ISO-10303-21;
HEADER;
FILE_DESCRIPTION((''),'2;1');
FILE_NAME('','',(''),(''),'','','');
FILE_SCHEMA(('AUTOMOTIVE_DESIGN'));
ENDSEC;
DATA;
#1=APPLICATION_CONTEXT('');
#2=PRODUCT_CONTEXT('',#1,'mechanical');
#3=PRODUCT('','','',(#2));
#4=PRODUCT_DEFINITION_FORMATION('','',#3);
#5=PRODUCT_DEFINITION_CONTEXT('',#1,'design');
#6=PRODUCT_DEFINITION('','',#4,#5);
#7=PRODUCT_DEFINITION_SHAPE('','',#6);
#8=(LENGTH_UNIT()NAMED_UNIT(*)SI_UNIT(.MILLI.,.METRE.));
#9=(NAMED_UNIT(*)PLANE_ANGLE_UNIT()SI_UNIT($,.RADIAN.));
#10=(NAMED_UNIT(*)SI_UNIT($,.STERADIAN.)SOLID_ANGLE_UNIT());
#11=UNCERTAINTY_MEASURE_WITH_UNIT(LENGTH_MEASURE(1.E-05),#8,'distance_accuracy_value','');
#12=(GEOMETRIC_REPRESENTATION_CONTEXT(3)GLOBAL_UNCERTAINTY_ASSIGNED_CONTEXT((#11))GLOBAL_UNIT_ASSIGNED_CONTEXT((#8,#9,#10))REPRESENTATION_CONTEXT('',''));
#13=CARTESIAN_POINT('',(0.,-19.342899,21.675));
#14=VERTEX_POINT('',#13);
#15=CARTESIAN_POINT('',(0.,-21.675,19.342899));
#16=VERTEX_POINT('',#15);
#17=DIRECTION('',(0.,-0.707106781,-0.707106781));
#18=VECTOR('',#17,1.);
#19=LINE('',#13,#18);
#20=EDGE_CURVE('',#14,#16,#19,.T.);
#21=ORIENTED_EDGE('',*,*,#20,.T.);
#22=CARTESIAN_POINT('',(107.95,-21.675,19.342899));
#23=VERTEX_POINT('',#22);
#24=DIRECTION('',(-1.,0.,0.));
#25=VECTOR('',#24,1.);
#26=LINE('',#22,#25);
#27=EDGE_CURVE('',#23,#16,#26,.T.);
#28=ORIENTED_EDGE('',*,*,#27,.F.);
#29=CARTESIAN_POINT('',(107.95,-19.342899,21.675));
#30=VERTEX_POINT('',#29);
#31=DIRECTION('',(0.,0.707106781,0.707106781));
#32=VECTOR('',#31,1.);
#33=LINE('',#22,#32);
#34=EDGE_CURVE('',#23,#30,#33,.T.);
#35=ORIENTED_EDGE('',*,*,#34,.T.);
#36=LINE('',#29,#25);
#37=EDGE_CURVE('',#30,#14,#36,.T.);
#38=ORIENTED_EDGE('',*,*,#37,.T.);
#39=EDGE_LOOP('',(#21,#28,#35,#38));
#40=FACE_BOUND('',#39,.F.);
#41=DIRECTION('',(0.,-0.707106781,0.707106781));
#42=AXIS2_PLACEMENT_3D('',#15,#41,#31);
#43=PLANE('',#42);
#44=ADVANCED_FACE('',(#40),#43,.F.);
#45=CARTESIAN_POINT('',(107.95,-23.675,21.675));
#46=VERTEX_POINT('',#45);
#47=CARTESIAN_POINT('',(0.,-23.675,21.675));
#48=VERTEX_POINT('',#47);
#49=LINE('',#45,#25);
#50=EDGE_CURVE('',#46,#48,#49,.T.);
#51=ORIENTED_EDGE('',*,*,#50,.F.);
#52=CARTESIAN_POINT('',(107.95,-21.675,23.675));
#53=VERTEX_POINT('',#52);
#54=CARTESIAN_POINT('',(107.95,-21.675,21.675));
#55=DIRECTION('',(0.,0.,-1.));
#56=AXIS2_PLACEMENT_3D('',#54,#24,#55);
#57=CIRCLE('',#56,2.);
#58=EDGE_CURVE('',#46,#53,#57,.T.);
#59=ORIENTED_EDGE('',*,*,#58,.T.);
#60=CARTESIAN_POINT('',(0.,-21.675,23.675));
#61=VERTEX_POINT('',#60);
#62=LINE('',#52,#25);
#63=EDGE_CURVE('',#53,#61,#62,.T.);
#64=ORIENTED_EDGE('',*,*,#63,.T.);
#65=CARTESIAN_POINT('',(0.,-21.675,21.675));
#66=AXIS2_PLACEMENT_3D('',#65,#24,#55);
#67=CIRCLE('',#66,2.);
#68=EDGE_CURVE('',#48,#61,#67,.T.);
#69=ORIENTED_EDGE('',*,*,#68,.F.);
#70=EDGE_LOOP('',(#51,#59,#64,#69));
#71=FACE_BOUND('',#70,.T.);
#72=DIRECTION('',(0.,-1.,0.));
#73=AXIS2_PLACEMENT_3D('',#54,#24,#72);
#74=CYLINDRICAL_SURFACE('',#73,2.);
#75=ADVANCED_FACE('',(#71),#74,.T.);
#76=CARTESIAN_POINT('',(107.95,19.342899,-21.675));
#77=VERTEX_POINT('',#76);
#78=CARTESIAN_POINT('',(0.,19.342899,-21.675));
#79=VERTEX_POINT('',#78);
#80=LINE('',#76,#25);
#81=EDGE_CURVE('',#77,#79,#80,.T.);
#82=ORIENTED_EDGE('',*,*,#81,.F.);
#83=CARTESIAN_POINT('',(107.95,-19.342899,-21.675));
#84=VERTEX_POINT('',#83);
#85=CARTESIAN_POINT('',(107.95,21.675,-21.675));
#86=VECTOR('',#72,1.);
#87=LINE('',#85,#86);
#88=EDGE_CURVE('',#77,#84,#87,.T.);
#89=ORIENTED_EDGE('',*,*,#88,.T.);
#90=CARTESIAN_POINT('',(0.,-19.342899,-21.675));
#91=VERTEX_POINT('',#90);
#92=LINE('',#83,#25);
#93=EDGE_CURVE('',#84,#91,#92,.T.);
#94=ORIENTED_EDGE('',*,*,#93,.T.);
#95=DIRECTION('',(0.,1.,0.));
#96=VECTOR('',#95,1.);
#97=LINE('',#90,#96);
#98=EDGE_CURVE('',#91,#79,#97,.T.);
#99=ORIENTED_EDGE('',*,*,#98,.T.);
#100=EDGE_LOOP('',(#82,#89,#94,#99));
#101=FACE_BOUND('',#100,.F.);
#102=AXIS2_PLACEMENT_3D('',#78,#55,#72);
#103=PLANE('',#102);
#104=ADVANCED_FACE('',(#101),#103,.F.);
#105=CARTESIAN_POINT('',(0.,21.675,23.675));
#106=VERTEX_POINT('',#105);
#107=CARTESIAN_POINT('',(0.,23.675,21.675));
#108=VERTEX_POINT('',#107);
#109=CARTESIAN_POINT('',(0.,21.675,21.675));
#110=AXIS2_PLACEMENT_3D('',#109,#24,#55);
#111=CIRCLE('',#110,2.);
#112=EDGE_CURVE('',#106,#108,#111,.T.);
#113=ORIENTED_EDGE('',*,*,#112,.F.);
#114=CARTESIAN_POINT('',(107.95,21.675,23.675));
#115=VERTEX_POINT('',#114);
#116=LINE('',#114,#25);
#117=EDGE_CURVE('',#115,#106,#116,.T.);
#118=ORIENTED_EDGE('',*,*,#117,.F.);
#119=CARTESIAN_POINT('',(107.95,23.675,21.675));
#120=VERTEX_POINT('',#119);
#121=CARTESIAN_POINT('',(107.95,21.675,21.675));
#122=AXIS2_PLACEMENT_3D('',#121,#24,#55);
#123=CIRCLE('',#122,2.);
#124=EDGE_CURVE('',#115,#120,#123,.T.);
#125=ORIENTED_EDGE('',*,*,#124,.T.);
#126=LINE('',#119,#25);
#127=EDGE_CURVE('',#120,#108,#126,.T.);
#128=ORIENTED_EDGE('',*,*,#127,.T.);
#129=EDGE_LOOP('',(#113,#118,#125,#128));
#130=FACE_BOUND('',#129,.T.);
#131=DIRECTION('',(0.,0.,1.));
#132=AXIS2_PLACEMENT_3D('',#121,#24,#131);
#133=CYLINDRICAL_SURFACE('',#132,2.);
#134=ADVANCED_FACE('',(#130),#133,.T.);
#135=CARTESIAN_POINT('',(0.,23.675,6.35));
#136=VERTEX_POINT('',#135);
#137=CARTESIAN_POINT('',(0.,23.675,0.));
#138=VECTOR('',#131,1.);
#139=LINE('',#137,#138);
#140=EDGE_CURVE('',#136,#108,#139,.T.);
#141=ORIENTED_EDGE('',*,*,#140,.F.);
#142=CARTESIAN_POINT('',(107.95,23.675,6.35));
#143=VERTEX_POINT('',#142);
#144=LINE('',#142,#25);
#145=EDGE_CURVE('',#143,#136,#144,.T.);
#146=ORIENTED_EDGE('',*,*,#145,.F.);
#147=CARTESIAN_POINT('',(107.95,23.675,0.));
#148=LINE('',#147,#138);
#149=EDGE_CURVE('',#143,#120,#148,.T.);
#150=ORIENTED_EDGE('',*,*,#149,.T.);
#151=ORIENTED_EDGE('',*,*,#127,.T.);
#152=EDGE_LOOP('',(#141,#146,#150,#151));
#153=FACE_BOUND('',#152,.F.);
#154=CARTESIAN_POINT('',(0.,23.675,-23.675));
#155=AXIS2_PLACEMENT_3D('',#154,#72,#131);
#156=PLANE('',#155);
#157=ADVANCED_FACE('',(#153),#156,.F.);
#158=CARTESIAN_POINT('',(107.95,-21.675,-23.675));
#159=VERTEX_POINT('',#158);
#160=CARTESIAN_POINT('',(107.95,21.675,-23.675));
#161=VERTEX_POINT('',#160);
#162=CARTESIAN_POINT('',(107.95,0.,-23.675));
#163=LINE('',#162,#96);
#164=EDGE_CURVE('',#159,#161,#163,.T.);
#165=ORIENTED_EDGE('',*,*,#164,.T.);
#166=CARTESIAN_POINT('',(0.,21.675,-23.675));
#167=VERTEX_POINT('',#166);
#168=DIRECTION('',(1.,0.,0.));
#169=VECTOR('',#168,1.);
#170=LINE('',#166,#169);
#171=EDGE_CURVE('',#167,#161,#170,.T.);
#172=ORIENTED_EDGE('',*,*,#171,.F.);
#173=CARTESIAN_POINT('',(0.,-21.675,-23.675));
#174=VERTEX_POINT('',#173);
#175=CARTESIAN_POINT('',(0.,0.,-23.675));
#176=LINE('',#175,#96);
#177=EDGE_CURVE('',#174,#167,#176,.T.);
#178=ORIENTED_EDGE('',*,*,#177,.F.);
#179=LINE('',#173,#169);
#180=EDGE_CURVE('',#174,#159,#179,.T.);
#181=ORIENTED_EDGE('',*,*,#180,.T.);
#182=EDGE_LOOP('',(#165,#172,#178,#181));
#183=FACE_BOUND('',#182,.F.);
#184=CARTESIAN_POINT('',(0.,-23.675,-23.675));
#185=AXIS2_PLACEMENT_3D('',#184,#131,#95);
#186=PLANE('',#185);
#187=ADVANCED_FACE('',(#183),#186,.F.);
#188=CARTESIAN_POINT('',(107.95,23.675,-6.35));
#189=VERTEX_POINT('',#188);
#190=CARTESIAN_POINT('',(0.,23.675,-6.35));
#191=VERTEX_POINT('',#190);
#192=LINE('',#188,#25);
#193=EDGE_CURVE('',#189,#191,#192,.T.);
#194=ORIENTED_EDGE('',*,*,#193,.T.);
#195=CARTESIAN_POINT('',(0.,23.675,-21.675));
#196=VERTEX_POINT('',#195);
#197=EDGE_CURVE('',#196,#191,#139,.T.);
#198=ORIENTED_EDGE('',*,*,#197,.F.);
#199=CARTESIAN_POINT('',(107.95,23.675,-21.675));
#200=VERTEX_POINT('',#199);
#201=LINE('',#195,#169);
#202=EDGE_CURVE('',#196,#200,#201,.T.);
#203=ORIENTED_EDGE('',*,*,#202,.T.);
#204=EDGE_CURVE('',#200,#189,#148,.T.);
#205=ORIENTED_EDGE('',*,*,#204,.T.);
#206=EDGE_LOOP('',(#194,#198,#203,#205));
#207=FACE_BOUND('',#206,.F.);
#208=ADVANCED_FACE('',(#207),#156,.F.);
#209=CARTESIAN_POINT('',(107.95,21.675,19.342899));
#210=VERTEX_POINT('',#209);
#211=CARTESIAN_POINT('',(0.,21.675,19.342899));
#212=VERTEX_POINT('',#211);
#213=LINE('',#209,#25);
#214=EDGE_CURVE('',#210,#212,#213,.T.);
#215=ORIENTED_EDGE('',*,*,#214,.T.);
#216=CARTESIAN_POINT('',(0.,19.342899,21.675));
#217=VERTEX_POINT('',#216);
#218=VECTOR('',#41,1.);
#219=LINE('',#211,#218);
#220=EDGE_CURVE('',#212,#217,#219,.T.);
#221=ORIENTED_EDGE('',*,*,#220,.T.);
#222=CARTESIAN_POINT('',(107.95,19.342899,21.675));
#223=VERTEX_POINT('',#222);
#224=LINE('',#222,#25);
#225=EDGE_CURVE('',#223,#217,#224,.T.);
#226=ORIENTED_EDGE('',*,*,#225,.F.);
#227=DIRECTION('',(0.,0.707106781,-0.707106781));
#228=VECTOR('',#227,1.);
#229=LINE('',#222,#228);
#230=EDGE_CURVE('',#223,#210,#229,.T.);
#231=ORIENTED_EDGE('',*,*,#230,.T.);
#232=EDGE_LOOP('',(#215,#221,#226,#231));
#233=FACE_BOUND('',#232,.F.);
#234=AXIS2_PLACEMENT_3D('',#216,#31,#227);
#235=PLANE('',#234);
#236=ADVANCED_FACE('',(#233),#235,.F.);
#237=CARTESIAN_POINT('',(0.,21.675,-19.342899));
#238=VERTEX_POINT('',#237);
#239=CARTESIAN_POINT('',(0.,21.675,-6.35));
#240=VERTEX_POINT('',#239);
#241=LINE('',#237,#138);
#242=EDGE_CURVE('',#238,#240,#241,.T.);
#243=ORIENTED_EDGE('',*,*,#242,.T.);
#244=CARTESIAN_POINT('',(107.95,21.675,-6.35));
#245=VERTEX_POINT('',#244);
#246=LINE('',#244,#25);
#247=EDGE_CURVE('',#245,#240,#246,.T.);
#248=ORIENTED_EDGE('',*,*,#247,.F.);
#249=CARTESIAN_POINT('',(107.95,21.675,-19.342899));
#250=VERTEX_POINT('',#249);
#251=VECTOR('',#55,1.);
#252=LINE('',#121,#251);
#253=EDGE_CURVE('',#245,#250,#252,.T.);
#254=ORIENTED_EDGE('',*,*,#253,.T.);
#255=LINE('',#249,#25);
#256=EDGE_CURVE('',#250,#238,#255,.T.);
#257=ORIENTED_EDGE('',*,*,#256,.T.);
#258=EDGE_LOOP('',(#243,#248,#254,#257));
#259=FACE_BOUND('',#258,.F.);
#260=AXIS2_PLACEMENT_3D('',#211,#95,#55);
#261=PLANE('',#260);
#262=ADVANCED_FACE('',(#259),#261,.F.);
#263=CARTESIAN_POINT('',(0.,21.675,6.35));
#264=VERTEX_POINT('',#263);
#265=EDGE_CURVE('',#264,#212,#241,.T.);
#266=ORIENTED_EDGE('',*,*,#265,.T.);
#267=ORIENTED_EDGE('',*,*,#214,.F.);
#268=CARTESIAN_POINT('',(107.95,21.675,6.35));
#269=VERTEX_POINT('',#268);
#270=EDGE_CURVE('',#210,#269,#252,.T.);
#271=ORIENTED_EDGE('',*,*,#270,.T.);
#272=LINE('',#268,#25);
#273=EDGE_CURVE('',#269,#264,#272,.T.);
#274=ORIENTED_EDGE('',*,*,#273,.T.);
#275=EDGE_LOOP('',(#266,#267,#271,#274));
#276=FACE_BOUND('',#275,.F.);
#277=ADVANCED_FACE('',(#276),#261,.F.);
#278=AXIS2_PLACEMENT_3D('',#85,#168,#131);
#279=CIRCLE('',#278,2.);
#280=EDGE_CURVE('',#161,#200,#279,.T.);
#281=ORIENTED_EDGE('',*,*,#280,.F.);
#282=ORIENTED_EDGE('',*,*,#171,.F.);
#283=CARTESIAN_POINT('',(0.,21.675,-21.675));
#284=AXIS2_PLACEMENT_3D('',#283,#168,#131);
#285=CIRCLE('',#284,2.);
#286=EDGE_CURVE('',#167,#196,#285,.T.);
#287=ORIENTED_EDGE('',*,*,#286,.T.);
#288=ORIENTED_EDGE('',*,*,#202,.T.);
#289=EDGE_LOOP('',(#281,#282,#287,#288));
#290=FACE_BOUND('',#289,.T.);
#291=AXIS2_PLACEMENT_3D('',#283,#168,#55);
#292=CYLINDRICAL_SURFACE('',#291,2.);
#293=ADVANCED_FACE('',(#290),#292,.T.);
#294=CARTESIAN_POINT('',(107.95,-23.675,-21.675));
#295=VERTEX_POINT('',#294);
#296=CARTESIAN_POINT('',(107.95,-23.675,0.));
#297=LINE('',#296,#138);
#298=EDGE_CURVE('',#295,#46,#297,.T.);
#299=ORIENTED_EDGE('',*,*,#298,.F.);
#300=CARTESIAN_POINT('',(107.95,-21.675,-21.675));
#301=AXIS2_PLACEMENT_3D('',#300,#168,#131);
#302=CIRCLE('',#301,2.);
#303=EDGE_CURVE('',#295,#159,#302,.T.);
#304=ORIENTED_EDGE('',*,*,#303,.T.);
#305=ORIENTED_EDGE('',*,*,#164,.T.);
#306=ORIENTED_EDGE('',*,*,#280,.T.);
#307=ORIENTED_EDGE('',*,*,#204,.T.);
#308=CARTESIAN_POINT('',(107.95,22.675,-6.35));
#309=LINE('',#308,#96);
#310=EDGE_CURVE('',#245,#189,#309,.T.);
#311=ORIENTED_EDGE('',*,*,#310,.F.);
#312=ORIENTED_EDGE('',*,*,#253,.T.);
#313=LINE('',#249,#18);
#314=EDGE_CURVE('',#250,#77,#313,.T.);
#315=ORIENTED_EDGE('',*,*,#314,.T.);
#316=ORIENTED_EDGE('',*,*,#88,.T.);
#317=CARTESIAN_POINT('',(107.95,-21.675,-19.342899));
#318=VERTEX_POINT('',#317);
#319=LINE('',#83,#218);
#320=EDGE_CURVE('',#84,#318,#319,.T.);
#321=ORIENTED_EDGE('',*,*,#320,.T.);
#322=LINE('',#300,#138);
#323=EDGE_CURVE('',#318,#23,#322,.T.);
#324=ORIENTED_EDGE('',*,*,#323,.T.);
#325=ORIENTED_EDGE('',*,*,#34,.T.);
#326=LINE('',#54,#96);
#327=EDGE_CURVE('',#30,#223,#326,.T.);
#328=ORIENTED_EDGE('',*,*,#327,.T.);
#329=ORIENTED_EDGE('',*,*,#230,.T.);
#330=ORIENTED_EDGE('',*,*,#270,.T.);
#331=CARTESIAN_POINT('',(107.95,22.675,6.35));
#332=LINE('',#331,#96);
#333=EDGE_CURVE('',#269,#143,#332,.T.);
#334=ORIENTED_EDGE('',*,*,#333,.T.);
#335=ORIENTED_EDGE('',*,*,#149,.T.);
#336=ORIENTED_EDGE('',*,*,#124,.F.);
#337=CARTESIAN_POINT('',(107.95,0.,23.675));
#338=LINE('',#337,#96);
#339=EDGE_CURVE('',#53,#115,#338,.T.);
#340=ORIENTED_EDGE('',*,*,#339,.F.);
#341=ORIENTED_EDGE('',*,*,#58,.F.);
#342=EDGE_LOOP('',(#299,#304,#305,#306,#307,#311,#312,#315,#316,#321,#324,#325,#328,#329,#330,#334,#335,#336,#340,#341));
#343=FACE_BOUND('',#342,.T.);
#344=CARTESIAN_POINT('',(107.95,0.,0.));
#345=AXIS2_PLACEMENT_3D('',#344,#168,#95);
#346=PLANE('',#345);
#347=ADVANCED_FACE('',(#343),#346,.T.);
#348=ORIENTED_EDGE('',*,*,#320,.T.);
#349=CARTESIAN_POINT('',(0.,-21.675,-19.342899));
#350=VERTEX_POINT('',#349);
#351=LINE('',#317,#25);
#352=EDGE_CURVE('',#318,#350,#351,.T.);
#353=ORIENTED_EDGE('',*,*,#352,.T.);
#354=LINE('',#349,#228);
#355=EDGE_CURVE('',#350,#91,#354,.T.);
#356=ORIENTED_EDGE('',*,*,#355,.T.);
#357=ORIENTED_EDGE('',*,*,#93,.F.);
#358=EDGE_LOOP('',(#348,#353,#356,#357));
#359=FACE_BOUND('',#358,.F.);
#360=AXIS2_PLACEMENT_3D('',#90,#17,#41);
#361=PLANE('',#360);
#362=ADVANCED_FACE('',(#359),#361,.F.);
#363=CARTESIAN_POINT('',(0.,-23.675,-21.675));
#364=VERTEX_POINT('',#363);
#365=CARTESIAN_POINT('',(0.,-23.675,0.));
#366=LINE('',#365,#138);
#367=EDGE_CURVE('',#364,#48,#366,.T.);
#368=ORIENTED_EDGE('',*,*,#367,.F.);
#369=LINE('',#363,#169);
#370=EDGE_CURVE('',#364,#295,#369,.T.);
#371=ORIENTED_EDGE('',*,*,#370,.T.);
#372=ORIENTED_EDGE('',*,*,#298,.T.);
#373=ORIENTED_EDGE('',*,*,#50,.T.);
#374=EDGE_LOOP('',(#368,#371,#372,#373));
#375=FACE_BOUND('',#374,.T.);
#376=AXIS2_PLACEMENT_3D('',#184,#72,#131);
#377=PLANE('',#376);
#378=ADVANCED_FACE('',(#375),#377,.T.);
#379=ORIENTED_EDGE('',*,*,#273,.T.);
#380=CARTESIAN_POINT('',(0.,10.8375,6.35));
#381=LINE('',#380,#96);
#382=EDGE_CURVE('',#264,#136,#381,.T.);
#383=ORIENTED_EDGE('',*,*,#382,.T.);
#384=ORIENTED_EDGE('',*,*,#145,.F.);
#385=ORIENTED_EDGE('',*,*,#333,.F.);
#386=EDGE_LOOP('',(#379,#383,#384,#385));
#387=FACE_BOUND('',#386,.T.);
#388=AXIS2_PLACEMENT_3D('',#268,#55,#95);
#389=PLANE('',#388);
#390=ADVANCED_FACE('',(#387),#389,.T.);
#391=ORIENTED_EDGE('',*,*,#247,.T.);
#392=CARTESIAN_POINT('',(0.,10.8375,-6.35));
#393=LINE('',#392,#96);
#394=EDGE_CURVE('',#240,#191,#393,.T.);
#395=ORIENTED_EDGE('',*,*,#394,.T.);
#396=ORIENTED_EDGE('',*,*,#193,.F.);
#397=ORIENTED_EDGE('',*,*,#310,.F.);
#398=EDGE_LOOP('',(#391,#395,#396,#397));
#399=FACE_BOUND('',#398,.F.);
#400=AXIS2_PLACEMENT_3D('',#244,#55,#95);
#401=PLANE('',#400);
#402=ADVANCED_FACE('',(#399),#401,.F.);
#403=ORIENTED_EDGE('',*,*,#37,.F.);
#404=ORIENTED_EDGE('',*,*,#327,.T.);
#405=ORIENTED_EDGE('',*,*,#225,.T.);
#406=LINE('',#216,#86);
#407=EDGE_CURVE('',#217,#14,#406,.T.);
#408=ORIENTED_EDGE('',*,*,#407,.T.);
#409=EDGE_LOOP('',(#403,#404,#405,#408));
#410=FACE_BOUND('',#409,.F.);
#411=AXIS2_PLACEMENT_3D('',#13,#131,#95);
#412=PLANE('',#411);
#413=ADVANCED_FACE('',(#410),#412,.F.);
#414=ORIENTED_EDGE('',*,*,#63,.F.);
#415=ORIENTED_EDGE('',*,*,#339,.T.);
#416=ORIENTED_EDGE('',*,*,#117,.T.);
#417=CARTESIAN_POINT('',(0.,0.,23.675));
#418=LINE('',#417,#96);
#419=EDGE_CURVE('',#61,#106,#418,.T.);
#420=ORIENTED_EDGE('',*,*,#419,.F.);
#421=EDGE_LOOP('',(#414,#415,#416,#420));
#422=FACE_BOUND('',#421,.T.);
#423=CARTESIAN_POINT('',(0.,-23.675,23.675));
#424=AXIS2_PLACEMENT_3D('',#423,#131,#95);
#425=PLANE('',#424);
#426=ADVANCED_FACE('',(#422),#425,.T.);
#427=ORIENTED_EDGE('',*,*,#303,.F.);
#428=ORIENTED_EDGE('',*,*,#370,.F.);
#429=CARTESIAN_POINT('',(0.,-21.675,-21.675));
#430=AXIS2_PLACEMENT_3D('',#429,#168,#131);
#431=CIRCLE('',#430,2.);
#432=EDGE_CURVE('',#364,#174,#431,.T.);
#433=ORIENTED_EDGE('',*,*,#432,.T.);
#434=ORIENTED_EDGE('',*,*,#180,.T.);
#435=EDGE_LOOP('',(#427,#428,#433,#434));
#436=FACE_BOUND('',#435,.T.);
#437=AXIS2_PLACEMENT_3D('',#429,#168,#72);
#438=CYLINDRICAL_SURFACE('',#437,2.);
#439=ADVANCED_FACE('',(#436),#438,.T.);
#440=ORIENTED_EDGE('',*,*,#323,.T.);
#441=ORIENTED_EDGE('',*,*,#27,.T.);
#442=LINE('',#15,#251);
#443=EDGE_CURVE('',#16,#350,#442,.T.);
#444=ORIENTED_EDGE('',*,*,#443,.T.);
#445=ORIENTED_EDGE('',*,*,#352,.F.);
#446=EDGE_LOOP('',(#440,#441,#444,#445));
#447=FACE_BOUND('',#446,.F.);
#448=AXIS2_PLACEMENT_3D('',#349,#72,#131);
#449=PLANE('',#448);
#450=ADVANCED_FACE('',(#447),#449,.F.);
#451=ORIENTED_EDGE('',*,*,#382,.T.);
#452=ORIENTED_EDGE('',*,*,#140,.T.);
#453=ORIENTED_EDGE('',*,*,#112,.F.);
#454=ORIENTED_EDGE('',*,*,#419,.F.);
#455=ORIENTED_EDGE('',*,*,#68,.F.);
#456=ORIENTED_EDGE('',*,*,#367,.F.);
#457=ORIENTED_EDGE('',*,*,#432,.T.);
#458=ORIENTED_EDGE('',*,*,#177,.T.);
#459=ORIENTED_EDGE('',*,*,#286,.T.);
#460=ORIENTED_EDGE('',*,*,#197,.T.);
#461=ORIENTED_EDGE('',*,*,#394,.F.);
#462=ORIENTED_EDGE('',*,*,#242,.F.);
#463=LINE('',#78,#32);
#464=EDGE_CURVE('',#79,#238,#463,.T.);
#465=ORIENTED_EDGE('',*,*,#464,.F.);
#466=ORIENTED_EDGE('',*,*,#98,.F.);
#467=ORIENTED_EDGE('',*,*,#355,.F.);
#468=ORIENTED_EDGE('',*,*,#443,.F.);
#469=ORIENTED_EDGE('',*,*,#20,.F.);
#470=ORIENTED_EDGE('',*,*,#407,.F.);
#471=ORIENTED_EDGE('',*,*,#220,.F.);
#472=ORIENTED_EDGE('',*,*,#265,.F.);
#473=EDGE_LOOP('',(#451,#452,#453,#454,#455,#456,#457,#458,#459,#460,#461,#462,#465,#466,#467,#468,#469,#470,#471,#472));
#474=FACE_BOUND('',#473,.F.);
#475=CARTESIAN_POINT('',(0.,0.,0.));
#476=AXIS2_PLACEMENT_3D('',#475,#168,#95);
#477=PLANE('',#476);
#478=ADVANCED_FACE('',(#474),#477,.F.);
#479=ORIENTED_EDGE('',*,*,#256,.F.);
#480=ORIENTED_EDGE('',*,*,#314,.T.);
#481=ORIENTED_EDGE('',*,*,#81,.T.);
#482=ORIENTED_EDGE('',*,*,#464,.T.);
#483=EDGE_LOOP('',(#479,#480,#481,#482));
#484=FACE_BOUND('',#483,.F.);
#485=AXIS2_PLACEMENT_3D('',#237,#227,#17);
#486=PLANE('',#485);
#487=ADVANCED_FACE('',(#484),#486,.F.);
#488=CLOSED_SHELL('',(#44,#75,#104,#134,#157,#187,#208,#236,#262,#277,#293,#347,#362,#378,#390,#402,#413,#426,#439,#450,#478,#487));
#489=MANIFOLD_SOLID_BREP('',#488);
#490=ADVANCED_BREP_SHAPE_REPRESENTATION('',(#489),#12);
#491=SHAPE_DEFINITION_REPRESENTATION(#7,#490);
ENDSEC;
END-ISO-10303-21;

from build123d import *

# Parameters (mm, degrees)
F1_W      = 47.35
F1_H      = 47.35
F2_DEPTH  = 2
F3_DEPTH  = 107.95
F4_R      = 6.35
F7_DEPTH  = 107.951
F8_R      = 6.35
F9_DEPTH  = 25
F10_R     = 2
F11_W     = 2
F11_H     = 12.7
F12_DEPTH = 107.951
F13_DEPTH = 25


# Not quite as in the source:
# - a feature names something its author has since deleted; it is built from what else it names


with BuildPart() as f2:
    # F1 (on Right) → F2 (new body)
    with BuildSketch(Plane.YZ):
        Rectangle(F1_W, F1_H)
        Polygon((19.3428993274, 21.675), (21.675, 21.675), (21.675, 19.3428993274), (21.675, -19.3428993274), (21.675, -21.675), (19.3428993274, -21.675), (-19.3428993274, -21.675), (-21.675, -21.675), (-21.675, -19.3428993274), (-21.675, 19.3428993274), (-21.675, 21.675), (-19.3428993274, 21.675), align=None, mode=Mode.SUBTRACT)
        Polygon((21.675, 19.3428993274), (19.3428993274, 21.675), (-19.3428993274, 21.675), (-21.675, 19.3428993274), (-21.675, -19.3428993274), (-19.3428993274, -21.675), (19.3428993274, -21.675), (21.675, -19.3428993274), align=None)
        Polygon((-19.3428993274, -21.675), (-21.675, -19.3428993274), (-21.675, -21.675), align=None)
        Polygon((21.675, -21.675), (21.675, -19.3428993274), (19.3428993274, -21.675), align=None)
        Polygon((21.675, 19.3428993274), (21.675, 21.675), (19.3428993274, 21.675), align=None)
        Polygon((-21.675, 19.3428993274), (-19.3428993274, 21.675), (-21.675, 21.675), align=None)
    extrude(amount=F2_DEPTH)

    # F1 (on Right) → F3 (join)
    with BuildSketch(Plane.YZ):
        Rectangle(F1_W, F1_H)
        Polygon((19.3428993274, 21.675), (21.675, 21.675), (21.675, 19.3428993274), (21.675, -19.3428993274), (21.675, -21.675), (19.3428993274, -21.675), (-19.3428993274, -21.675), (-21.675, -21.675), (-21.675, -19.3428993274), (-21.675, 19.3428993274), (-21.675, 21.675), (-19.3428993274, 21.675), align=None, mode=Mode.SUBTRACT)
        Polygon((21.675, 19.3428993274), (21.675, 21.675), (19.3428993274, 21.675), align=None)
        Polygon((21.675, -21.675), (21.675, -19.3428993274), (19.3428993274, -21.675), align=None)
        Polygon((-19.3428993274, -21.675), (-21.675, -19.3428993274), (-21.675, -21.675), align=None)
        Polygon((-21.675, 19.3428993274), (-19.3428993274, 21.675), (-21.675, 21.675), align=None)
    extrude(amount=F3_DEPTH)

    # F4 (on face) → F7 (cut, through all)
    with BuildSketch(Plane.YZ):
        Circle(F4_R)
    extrude(amount=F7_DEPTH, mode=Mode.SUBTRACT)

    # F8 (on face) → F9 (cut)
    with BuildSketch(Plane(origin=(0, 23.675, 0), x_dir=(-1, 0, 0), z_dir=(0, 1, 0))):
        with Locations((-94.95, 0)):
            Circle(F8_R)
    extrude(amount=-F9_DEPTH, mode=Mode.SUBTRACT)

    # F10
    f10_edges = [f2.edges().sort_by_distance(p)[0] for p in [
        (53.975, -23.675, 23.675),
        (53.975, 23.675, 23.675),
        (53.975, 23.675, -23.675),
        (53.975, -23.675, -23.675),
    ]]
    fillet(f10_edges, radius=F10_R)

    # F11 (on face) → F12 (cut, through all)
    with BuildSketch(Plane.YZ.offset(107.95)):
        with Locations((22.675, 0)):
            Rectangle(F11_W, F11_H)
    extrude(amount=-F12_DEPTH, mode=Mode.SUBTRACT)

    # F1 (on Right) → F13 (cut)
    with BuildSketch(Plane.YZ):
        Polygon((21.675, 19.3428993274), (19.3428993274, 21.675), (-19.3428993274, 21.675), (-21.675, 19.3428993274), (-21.675, -19.3428993274), (-19.3428993274, -21.675), (19.3428993274, -21.675), (21.675, -19.3428993274), align=None)
    extrude(amount=F13_DEPTH, mode=Mode.SUBTRACT)


solid = f2.part
